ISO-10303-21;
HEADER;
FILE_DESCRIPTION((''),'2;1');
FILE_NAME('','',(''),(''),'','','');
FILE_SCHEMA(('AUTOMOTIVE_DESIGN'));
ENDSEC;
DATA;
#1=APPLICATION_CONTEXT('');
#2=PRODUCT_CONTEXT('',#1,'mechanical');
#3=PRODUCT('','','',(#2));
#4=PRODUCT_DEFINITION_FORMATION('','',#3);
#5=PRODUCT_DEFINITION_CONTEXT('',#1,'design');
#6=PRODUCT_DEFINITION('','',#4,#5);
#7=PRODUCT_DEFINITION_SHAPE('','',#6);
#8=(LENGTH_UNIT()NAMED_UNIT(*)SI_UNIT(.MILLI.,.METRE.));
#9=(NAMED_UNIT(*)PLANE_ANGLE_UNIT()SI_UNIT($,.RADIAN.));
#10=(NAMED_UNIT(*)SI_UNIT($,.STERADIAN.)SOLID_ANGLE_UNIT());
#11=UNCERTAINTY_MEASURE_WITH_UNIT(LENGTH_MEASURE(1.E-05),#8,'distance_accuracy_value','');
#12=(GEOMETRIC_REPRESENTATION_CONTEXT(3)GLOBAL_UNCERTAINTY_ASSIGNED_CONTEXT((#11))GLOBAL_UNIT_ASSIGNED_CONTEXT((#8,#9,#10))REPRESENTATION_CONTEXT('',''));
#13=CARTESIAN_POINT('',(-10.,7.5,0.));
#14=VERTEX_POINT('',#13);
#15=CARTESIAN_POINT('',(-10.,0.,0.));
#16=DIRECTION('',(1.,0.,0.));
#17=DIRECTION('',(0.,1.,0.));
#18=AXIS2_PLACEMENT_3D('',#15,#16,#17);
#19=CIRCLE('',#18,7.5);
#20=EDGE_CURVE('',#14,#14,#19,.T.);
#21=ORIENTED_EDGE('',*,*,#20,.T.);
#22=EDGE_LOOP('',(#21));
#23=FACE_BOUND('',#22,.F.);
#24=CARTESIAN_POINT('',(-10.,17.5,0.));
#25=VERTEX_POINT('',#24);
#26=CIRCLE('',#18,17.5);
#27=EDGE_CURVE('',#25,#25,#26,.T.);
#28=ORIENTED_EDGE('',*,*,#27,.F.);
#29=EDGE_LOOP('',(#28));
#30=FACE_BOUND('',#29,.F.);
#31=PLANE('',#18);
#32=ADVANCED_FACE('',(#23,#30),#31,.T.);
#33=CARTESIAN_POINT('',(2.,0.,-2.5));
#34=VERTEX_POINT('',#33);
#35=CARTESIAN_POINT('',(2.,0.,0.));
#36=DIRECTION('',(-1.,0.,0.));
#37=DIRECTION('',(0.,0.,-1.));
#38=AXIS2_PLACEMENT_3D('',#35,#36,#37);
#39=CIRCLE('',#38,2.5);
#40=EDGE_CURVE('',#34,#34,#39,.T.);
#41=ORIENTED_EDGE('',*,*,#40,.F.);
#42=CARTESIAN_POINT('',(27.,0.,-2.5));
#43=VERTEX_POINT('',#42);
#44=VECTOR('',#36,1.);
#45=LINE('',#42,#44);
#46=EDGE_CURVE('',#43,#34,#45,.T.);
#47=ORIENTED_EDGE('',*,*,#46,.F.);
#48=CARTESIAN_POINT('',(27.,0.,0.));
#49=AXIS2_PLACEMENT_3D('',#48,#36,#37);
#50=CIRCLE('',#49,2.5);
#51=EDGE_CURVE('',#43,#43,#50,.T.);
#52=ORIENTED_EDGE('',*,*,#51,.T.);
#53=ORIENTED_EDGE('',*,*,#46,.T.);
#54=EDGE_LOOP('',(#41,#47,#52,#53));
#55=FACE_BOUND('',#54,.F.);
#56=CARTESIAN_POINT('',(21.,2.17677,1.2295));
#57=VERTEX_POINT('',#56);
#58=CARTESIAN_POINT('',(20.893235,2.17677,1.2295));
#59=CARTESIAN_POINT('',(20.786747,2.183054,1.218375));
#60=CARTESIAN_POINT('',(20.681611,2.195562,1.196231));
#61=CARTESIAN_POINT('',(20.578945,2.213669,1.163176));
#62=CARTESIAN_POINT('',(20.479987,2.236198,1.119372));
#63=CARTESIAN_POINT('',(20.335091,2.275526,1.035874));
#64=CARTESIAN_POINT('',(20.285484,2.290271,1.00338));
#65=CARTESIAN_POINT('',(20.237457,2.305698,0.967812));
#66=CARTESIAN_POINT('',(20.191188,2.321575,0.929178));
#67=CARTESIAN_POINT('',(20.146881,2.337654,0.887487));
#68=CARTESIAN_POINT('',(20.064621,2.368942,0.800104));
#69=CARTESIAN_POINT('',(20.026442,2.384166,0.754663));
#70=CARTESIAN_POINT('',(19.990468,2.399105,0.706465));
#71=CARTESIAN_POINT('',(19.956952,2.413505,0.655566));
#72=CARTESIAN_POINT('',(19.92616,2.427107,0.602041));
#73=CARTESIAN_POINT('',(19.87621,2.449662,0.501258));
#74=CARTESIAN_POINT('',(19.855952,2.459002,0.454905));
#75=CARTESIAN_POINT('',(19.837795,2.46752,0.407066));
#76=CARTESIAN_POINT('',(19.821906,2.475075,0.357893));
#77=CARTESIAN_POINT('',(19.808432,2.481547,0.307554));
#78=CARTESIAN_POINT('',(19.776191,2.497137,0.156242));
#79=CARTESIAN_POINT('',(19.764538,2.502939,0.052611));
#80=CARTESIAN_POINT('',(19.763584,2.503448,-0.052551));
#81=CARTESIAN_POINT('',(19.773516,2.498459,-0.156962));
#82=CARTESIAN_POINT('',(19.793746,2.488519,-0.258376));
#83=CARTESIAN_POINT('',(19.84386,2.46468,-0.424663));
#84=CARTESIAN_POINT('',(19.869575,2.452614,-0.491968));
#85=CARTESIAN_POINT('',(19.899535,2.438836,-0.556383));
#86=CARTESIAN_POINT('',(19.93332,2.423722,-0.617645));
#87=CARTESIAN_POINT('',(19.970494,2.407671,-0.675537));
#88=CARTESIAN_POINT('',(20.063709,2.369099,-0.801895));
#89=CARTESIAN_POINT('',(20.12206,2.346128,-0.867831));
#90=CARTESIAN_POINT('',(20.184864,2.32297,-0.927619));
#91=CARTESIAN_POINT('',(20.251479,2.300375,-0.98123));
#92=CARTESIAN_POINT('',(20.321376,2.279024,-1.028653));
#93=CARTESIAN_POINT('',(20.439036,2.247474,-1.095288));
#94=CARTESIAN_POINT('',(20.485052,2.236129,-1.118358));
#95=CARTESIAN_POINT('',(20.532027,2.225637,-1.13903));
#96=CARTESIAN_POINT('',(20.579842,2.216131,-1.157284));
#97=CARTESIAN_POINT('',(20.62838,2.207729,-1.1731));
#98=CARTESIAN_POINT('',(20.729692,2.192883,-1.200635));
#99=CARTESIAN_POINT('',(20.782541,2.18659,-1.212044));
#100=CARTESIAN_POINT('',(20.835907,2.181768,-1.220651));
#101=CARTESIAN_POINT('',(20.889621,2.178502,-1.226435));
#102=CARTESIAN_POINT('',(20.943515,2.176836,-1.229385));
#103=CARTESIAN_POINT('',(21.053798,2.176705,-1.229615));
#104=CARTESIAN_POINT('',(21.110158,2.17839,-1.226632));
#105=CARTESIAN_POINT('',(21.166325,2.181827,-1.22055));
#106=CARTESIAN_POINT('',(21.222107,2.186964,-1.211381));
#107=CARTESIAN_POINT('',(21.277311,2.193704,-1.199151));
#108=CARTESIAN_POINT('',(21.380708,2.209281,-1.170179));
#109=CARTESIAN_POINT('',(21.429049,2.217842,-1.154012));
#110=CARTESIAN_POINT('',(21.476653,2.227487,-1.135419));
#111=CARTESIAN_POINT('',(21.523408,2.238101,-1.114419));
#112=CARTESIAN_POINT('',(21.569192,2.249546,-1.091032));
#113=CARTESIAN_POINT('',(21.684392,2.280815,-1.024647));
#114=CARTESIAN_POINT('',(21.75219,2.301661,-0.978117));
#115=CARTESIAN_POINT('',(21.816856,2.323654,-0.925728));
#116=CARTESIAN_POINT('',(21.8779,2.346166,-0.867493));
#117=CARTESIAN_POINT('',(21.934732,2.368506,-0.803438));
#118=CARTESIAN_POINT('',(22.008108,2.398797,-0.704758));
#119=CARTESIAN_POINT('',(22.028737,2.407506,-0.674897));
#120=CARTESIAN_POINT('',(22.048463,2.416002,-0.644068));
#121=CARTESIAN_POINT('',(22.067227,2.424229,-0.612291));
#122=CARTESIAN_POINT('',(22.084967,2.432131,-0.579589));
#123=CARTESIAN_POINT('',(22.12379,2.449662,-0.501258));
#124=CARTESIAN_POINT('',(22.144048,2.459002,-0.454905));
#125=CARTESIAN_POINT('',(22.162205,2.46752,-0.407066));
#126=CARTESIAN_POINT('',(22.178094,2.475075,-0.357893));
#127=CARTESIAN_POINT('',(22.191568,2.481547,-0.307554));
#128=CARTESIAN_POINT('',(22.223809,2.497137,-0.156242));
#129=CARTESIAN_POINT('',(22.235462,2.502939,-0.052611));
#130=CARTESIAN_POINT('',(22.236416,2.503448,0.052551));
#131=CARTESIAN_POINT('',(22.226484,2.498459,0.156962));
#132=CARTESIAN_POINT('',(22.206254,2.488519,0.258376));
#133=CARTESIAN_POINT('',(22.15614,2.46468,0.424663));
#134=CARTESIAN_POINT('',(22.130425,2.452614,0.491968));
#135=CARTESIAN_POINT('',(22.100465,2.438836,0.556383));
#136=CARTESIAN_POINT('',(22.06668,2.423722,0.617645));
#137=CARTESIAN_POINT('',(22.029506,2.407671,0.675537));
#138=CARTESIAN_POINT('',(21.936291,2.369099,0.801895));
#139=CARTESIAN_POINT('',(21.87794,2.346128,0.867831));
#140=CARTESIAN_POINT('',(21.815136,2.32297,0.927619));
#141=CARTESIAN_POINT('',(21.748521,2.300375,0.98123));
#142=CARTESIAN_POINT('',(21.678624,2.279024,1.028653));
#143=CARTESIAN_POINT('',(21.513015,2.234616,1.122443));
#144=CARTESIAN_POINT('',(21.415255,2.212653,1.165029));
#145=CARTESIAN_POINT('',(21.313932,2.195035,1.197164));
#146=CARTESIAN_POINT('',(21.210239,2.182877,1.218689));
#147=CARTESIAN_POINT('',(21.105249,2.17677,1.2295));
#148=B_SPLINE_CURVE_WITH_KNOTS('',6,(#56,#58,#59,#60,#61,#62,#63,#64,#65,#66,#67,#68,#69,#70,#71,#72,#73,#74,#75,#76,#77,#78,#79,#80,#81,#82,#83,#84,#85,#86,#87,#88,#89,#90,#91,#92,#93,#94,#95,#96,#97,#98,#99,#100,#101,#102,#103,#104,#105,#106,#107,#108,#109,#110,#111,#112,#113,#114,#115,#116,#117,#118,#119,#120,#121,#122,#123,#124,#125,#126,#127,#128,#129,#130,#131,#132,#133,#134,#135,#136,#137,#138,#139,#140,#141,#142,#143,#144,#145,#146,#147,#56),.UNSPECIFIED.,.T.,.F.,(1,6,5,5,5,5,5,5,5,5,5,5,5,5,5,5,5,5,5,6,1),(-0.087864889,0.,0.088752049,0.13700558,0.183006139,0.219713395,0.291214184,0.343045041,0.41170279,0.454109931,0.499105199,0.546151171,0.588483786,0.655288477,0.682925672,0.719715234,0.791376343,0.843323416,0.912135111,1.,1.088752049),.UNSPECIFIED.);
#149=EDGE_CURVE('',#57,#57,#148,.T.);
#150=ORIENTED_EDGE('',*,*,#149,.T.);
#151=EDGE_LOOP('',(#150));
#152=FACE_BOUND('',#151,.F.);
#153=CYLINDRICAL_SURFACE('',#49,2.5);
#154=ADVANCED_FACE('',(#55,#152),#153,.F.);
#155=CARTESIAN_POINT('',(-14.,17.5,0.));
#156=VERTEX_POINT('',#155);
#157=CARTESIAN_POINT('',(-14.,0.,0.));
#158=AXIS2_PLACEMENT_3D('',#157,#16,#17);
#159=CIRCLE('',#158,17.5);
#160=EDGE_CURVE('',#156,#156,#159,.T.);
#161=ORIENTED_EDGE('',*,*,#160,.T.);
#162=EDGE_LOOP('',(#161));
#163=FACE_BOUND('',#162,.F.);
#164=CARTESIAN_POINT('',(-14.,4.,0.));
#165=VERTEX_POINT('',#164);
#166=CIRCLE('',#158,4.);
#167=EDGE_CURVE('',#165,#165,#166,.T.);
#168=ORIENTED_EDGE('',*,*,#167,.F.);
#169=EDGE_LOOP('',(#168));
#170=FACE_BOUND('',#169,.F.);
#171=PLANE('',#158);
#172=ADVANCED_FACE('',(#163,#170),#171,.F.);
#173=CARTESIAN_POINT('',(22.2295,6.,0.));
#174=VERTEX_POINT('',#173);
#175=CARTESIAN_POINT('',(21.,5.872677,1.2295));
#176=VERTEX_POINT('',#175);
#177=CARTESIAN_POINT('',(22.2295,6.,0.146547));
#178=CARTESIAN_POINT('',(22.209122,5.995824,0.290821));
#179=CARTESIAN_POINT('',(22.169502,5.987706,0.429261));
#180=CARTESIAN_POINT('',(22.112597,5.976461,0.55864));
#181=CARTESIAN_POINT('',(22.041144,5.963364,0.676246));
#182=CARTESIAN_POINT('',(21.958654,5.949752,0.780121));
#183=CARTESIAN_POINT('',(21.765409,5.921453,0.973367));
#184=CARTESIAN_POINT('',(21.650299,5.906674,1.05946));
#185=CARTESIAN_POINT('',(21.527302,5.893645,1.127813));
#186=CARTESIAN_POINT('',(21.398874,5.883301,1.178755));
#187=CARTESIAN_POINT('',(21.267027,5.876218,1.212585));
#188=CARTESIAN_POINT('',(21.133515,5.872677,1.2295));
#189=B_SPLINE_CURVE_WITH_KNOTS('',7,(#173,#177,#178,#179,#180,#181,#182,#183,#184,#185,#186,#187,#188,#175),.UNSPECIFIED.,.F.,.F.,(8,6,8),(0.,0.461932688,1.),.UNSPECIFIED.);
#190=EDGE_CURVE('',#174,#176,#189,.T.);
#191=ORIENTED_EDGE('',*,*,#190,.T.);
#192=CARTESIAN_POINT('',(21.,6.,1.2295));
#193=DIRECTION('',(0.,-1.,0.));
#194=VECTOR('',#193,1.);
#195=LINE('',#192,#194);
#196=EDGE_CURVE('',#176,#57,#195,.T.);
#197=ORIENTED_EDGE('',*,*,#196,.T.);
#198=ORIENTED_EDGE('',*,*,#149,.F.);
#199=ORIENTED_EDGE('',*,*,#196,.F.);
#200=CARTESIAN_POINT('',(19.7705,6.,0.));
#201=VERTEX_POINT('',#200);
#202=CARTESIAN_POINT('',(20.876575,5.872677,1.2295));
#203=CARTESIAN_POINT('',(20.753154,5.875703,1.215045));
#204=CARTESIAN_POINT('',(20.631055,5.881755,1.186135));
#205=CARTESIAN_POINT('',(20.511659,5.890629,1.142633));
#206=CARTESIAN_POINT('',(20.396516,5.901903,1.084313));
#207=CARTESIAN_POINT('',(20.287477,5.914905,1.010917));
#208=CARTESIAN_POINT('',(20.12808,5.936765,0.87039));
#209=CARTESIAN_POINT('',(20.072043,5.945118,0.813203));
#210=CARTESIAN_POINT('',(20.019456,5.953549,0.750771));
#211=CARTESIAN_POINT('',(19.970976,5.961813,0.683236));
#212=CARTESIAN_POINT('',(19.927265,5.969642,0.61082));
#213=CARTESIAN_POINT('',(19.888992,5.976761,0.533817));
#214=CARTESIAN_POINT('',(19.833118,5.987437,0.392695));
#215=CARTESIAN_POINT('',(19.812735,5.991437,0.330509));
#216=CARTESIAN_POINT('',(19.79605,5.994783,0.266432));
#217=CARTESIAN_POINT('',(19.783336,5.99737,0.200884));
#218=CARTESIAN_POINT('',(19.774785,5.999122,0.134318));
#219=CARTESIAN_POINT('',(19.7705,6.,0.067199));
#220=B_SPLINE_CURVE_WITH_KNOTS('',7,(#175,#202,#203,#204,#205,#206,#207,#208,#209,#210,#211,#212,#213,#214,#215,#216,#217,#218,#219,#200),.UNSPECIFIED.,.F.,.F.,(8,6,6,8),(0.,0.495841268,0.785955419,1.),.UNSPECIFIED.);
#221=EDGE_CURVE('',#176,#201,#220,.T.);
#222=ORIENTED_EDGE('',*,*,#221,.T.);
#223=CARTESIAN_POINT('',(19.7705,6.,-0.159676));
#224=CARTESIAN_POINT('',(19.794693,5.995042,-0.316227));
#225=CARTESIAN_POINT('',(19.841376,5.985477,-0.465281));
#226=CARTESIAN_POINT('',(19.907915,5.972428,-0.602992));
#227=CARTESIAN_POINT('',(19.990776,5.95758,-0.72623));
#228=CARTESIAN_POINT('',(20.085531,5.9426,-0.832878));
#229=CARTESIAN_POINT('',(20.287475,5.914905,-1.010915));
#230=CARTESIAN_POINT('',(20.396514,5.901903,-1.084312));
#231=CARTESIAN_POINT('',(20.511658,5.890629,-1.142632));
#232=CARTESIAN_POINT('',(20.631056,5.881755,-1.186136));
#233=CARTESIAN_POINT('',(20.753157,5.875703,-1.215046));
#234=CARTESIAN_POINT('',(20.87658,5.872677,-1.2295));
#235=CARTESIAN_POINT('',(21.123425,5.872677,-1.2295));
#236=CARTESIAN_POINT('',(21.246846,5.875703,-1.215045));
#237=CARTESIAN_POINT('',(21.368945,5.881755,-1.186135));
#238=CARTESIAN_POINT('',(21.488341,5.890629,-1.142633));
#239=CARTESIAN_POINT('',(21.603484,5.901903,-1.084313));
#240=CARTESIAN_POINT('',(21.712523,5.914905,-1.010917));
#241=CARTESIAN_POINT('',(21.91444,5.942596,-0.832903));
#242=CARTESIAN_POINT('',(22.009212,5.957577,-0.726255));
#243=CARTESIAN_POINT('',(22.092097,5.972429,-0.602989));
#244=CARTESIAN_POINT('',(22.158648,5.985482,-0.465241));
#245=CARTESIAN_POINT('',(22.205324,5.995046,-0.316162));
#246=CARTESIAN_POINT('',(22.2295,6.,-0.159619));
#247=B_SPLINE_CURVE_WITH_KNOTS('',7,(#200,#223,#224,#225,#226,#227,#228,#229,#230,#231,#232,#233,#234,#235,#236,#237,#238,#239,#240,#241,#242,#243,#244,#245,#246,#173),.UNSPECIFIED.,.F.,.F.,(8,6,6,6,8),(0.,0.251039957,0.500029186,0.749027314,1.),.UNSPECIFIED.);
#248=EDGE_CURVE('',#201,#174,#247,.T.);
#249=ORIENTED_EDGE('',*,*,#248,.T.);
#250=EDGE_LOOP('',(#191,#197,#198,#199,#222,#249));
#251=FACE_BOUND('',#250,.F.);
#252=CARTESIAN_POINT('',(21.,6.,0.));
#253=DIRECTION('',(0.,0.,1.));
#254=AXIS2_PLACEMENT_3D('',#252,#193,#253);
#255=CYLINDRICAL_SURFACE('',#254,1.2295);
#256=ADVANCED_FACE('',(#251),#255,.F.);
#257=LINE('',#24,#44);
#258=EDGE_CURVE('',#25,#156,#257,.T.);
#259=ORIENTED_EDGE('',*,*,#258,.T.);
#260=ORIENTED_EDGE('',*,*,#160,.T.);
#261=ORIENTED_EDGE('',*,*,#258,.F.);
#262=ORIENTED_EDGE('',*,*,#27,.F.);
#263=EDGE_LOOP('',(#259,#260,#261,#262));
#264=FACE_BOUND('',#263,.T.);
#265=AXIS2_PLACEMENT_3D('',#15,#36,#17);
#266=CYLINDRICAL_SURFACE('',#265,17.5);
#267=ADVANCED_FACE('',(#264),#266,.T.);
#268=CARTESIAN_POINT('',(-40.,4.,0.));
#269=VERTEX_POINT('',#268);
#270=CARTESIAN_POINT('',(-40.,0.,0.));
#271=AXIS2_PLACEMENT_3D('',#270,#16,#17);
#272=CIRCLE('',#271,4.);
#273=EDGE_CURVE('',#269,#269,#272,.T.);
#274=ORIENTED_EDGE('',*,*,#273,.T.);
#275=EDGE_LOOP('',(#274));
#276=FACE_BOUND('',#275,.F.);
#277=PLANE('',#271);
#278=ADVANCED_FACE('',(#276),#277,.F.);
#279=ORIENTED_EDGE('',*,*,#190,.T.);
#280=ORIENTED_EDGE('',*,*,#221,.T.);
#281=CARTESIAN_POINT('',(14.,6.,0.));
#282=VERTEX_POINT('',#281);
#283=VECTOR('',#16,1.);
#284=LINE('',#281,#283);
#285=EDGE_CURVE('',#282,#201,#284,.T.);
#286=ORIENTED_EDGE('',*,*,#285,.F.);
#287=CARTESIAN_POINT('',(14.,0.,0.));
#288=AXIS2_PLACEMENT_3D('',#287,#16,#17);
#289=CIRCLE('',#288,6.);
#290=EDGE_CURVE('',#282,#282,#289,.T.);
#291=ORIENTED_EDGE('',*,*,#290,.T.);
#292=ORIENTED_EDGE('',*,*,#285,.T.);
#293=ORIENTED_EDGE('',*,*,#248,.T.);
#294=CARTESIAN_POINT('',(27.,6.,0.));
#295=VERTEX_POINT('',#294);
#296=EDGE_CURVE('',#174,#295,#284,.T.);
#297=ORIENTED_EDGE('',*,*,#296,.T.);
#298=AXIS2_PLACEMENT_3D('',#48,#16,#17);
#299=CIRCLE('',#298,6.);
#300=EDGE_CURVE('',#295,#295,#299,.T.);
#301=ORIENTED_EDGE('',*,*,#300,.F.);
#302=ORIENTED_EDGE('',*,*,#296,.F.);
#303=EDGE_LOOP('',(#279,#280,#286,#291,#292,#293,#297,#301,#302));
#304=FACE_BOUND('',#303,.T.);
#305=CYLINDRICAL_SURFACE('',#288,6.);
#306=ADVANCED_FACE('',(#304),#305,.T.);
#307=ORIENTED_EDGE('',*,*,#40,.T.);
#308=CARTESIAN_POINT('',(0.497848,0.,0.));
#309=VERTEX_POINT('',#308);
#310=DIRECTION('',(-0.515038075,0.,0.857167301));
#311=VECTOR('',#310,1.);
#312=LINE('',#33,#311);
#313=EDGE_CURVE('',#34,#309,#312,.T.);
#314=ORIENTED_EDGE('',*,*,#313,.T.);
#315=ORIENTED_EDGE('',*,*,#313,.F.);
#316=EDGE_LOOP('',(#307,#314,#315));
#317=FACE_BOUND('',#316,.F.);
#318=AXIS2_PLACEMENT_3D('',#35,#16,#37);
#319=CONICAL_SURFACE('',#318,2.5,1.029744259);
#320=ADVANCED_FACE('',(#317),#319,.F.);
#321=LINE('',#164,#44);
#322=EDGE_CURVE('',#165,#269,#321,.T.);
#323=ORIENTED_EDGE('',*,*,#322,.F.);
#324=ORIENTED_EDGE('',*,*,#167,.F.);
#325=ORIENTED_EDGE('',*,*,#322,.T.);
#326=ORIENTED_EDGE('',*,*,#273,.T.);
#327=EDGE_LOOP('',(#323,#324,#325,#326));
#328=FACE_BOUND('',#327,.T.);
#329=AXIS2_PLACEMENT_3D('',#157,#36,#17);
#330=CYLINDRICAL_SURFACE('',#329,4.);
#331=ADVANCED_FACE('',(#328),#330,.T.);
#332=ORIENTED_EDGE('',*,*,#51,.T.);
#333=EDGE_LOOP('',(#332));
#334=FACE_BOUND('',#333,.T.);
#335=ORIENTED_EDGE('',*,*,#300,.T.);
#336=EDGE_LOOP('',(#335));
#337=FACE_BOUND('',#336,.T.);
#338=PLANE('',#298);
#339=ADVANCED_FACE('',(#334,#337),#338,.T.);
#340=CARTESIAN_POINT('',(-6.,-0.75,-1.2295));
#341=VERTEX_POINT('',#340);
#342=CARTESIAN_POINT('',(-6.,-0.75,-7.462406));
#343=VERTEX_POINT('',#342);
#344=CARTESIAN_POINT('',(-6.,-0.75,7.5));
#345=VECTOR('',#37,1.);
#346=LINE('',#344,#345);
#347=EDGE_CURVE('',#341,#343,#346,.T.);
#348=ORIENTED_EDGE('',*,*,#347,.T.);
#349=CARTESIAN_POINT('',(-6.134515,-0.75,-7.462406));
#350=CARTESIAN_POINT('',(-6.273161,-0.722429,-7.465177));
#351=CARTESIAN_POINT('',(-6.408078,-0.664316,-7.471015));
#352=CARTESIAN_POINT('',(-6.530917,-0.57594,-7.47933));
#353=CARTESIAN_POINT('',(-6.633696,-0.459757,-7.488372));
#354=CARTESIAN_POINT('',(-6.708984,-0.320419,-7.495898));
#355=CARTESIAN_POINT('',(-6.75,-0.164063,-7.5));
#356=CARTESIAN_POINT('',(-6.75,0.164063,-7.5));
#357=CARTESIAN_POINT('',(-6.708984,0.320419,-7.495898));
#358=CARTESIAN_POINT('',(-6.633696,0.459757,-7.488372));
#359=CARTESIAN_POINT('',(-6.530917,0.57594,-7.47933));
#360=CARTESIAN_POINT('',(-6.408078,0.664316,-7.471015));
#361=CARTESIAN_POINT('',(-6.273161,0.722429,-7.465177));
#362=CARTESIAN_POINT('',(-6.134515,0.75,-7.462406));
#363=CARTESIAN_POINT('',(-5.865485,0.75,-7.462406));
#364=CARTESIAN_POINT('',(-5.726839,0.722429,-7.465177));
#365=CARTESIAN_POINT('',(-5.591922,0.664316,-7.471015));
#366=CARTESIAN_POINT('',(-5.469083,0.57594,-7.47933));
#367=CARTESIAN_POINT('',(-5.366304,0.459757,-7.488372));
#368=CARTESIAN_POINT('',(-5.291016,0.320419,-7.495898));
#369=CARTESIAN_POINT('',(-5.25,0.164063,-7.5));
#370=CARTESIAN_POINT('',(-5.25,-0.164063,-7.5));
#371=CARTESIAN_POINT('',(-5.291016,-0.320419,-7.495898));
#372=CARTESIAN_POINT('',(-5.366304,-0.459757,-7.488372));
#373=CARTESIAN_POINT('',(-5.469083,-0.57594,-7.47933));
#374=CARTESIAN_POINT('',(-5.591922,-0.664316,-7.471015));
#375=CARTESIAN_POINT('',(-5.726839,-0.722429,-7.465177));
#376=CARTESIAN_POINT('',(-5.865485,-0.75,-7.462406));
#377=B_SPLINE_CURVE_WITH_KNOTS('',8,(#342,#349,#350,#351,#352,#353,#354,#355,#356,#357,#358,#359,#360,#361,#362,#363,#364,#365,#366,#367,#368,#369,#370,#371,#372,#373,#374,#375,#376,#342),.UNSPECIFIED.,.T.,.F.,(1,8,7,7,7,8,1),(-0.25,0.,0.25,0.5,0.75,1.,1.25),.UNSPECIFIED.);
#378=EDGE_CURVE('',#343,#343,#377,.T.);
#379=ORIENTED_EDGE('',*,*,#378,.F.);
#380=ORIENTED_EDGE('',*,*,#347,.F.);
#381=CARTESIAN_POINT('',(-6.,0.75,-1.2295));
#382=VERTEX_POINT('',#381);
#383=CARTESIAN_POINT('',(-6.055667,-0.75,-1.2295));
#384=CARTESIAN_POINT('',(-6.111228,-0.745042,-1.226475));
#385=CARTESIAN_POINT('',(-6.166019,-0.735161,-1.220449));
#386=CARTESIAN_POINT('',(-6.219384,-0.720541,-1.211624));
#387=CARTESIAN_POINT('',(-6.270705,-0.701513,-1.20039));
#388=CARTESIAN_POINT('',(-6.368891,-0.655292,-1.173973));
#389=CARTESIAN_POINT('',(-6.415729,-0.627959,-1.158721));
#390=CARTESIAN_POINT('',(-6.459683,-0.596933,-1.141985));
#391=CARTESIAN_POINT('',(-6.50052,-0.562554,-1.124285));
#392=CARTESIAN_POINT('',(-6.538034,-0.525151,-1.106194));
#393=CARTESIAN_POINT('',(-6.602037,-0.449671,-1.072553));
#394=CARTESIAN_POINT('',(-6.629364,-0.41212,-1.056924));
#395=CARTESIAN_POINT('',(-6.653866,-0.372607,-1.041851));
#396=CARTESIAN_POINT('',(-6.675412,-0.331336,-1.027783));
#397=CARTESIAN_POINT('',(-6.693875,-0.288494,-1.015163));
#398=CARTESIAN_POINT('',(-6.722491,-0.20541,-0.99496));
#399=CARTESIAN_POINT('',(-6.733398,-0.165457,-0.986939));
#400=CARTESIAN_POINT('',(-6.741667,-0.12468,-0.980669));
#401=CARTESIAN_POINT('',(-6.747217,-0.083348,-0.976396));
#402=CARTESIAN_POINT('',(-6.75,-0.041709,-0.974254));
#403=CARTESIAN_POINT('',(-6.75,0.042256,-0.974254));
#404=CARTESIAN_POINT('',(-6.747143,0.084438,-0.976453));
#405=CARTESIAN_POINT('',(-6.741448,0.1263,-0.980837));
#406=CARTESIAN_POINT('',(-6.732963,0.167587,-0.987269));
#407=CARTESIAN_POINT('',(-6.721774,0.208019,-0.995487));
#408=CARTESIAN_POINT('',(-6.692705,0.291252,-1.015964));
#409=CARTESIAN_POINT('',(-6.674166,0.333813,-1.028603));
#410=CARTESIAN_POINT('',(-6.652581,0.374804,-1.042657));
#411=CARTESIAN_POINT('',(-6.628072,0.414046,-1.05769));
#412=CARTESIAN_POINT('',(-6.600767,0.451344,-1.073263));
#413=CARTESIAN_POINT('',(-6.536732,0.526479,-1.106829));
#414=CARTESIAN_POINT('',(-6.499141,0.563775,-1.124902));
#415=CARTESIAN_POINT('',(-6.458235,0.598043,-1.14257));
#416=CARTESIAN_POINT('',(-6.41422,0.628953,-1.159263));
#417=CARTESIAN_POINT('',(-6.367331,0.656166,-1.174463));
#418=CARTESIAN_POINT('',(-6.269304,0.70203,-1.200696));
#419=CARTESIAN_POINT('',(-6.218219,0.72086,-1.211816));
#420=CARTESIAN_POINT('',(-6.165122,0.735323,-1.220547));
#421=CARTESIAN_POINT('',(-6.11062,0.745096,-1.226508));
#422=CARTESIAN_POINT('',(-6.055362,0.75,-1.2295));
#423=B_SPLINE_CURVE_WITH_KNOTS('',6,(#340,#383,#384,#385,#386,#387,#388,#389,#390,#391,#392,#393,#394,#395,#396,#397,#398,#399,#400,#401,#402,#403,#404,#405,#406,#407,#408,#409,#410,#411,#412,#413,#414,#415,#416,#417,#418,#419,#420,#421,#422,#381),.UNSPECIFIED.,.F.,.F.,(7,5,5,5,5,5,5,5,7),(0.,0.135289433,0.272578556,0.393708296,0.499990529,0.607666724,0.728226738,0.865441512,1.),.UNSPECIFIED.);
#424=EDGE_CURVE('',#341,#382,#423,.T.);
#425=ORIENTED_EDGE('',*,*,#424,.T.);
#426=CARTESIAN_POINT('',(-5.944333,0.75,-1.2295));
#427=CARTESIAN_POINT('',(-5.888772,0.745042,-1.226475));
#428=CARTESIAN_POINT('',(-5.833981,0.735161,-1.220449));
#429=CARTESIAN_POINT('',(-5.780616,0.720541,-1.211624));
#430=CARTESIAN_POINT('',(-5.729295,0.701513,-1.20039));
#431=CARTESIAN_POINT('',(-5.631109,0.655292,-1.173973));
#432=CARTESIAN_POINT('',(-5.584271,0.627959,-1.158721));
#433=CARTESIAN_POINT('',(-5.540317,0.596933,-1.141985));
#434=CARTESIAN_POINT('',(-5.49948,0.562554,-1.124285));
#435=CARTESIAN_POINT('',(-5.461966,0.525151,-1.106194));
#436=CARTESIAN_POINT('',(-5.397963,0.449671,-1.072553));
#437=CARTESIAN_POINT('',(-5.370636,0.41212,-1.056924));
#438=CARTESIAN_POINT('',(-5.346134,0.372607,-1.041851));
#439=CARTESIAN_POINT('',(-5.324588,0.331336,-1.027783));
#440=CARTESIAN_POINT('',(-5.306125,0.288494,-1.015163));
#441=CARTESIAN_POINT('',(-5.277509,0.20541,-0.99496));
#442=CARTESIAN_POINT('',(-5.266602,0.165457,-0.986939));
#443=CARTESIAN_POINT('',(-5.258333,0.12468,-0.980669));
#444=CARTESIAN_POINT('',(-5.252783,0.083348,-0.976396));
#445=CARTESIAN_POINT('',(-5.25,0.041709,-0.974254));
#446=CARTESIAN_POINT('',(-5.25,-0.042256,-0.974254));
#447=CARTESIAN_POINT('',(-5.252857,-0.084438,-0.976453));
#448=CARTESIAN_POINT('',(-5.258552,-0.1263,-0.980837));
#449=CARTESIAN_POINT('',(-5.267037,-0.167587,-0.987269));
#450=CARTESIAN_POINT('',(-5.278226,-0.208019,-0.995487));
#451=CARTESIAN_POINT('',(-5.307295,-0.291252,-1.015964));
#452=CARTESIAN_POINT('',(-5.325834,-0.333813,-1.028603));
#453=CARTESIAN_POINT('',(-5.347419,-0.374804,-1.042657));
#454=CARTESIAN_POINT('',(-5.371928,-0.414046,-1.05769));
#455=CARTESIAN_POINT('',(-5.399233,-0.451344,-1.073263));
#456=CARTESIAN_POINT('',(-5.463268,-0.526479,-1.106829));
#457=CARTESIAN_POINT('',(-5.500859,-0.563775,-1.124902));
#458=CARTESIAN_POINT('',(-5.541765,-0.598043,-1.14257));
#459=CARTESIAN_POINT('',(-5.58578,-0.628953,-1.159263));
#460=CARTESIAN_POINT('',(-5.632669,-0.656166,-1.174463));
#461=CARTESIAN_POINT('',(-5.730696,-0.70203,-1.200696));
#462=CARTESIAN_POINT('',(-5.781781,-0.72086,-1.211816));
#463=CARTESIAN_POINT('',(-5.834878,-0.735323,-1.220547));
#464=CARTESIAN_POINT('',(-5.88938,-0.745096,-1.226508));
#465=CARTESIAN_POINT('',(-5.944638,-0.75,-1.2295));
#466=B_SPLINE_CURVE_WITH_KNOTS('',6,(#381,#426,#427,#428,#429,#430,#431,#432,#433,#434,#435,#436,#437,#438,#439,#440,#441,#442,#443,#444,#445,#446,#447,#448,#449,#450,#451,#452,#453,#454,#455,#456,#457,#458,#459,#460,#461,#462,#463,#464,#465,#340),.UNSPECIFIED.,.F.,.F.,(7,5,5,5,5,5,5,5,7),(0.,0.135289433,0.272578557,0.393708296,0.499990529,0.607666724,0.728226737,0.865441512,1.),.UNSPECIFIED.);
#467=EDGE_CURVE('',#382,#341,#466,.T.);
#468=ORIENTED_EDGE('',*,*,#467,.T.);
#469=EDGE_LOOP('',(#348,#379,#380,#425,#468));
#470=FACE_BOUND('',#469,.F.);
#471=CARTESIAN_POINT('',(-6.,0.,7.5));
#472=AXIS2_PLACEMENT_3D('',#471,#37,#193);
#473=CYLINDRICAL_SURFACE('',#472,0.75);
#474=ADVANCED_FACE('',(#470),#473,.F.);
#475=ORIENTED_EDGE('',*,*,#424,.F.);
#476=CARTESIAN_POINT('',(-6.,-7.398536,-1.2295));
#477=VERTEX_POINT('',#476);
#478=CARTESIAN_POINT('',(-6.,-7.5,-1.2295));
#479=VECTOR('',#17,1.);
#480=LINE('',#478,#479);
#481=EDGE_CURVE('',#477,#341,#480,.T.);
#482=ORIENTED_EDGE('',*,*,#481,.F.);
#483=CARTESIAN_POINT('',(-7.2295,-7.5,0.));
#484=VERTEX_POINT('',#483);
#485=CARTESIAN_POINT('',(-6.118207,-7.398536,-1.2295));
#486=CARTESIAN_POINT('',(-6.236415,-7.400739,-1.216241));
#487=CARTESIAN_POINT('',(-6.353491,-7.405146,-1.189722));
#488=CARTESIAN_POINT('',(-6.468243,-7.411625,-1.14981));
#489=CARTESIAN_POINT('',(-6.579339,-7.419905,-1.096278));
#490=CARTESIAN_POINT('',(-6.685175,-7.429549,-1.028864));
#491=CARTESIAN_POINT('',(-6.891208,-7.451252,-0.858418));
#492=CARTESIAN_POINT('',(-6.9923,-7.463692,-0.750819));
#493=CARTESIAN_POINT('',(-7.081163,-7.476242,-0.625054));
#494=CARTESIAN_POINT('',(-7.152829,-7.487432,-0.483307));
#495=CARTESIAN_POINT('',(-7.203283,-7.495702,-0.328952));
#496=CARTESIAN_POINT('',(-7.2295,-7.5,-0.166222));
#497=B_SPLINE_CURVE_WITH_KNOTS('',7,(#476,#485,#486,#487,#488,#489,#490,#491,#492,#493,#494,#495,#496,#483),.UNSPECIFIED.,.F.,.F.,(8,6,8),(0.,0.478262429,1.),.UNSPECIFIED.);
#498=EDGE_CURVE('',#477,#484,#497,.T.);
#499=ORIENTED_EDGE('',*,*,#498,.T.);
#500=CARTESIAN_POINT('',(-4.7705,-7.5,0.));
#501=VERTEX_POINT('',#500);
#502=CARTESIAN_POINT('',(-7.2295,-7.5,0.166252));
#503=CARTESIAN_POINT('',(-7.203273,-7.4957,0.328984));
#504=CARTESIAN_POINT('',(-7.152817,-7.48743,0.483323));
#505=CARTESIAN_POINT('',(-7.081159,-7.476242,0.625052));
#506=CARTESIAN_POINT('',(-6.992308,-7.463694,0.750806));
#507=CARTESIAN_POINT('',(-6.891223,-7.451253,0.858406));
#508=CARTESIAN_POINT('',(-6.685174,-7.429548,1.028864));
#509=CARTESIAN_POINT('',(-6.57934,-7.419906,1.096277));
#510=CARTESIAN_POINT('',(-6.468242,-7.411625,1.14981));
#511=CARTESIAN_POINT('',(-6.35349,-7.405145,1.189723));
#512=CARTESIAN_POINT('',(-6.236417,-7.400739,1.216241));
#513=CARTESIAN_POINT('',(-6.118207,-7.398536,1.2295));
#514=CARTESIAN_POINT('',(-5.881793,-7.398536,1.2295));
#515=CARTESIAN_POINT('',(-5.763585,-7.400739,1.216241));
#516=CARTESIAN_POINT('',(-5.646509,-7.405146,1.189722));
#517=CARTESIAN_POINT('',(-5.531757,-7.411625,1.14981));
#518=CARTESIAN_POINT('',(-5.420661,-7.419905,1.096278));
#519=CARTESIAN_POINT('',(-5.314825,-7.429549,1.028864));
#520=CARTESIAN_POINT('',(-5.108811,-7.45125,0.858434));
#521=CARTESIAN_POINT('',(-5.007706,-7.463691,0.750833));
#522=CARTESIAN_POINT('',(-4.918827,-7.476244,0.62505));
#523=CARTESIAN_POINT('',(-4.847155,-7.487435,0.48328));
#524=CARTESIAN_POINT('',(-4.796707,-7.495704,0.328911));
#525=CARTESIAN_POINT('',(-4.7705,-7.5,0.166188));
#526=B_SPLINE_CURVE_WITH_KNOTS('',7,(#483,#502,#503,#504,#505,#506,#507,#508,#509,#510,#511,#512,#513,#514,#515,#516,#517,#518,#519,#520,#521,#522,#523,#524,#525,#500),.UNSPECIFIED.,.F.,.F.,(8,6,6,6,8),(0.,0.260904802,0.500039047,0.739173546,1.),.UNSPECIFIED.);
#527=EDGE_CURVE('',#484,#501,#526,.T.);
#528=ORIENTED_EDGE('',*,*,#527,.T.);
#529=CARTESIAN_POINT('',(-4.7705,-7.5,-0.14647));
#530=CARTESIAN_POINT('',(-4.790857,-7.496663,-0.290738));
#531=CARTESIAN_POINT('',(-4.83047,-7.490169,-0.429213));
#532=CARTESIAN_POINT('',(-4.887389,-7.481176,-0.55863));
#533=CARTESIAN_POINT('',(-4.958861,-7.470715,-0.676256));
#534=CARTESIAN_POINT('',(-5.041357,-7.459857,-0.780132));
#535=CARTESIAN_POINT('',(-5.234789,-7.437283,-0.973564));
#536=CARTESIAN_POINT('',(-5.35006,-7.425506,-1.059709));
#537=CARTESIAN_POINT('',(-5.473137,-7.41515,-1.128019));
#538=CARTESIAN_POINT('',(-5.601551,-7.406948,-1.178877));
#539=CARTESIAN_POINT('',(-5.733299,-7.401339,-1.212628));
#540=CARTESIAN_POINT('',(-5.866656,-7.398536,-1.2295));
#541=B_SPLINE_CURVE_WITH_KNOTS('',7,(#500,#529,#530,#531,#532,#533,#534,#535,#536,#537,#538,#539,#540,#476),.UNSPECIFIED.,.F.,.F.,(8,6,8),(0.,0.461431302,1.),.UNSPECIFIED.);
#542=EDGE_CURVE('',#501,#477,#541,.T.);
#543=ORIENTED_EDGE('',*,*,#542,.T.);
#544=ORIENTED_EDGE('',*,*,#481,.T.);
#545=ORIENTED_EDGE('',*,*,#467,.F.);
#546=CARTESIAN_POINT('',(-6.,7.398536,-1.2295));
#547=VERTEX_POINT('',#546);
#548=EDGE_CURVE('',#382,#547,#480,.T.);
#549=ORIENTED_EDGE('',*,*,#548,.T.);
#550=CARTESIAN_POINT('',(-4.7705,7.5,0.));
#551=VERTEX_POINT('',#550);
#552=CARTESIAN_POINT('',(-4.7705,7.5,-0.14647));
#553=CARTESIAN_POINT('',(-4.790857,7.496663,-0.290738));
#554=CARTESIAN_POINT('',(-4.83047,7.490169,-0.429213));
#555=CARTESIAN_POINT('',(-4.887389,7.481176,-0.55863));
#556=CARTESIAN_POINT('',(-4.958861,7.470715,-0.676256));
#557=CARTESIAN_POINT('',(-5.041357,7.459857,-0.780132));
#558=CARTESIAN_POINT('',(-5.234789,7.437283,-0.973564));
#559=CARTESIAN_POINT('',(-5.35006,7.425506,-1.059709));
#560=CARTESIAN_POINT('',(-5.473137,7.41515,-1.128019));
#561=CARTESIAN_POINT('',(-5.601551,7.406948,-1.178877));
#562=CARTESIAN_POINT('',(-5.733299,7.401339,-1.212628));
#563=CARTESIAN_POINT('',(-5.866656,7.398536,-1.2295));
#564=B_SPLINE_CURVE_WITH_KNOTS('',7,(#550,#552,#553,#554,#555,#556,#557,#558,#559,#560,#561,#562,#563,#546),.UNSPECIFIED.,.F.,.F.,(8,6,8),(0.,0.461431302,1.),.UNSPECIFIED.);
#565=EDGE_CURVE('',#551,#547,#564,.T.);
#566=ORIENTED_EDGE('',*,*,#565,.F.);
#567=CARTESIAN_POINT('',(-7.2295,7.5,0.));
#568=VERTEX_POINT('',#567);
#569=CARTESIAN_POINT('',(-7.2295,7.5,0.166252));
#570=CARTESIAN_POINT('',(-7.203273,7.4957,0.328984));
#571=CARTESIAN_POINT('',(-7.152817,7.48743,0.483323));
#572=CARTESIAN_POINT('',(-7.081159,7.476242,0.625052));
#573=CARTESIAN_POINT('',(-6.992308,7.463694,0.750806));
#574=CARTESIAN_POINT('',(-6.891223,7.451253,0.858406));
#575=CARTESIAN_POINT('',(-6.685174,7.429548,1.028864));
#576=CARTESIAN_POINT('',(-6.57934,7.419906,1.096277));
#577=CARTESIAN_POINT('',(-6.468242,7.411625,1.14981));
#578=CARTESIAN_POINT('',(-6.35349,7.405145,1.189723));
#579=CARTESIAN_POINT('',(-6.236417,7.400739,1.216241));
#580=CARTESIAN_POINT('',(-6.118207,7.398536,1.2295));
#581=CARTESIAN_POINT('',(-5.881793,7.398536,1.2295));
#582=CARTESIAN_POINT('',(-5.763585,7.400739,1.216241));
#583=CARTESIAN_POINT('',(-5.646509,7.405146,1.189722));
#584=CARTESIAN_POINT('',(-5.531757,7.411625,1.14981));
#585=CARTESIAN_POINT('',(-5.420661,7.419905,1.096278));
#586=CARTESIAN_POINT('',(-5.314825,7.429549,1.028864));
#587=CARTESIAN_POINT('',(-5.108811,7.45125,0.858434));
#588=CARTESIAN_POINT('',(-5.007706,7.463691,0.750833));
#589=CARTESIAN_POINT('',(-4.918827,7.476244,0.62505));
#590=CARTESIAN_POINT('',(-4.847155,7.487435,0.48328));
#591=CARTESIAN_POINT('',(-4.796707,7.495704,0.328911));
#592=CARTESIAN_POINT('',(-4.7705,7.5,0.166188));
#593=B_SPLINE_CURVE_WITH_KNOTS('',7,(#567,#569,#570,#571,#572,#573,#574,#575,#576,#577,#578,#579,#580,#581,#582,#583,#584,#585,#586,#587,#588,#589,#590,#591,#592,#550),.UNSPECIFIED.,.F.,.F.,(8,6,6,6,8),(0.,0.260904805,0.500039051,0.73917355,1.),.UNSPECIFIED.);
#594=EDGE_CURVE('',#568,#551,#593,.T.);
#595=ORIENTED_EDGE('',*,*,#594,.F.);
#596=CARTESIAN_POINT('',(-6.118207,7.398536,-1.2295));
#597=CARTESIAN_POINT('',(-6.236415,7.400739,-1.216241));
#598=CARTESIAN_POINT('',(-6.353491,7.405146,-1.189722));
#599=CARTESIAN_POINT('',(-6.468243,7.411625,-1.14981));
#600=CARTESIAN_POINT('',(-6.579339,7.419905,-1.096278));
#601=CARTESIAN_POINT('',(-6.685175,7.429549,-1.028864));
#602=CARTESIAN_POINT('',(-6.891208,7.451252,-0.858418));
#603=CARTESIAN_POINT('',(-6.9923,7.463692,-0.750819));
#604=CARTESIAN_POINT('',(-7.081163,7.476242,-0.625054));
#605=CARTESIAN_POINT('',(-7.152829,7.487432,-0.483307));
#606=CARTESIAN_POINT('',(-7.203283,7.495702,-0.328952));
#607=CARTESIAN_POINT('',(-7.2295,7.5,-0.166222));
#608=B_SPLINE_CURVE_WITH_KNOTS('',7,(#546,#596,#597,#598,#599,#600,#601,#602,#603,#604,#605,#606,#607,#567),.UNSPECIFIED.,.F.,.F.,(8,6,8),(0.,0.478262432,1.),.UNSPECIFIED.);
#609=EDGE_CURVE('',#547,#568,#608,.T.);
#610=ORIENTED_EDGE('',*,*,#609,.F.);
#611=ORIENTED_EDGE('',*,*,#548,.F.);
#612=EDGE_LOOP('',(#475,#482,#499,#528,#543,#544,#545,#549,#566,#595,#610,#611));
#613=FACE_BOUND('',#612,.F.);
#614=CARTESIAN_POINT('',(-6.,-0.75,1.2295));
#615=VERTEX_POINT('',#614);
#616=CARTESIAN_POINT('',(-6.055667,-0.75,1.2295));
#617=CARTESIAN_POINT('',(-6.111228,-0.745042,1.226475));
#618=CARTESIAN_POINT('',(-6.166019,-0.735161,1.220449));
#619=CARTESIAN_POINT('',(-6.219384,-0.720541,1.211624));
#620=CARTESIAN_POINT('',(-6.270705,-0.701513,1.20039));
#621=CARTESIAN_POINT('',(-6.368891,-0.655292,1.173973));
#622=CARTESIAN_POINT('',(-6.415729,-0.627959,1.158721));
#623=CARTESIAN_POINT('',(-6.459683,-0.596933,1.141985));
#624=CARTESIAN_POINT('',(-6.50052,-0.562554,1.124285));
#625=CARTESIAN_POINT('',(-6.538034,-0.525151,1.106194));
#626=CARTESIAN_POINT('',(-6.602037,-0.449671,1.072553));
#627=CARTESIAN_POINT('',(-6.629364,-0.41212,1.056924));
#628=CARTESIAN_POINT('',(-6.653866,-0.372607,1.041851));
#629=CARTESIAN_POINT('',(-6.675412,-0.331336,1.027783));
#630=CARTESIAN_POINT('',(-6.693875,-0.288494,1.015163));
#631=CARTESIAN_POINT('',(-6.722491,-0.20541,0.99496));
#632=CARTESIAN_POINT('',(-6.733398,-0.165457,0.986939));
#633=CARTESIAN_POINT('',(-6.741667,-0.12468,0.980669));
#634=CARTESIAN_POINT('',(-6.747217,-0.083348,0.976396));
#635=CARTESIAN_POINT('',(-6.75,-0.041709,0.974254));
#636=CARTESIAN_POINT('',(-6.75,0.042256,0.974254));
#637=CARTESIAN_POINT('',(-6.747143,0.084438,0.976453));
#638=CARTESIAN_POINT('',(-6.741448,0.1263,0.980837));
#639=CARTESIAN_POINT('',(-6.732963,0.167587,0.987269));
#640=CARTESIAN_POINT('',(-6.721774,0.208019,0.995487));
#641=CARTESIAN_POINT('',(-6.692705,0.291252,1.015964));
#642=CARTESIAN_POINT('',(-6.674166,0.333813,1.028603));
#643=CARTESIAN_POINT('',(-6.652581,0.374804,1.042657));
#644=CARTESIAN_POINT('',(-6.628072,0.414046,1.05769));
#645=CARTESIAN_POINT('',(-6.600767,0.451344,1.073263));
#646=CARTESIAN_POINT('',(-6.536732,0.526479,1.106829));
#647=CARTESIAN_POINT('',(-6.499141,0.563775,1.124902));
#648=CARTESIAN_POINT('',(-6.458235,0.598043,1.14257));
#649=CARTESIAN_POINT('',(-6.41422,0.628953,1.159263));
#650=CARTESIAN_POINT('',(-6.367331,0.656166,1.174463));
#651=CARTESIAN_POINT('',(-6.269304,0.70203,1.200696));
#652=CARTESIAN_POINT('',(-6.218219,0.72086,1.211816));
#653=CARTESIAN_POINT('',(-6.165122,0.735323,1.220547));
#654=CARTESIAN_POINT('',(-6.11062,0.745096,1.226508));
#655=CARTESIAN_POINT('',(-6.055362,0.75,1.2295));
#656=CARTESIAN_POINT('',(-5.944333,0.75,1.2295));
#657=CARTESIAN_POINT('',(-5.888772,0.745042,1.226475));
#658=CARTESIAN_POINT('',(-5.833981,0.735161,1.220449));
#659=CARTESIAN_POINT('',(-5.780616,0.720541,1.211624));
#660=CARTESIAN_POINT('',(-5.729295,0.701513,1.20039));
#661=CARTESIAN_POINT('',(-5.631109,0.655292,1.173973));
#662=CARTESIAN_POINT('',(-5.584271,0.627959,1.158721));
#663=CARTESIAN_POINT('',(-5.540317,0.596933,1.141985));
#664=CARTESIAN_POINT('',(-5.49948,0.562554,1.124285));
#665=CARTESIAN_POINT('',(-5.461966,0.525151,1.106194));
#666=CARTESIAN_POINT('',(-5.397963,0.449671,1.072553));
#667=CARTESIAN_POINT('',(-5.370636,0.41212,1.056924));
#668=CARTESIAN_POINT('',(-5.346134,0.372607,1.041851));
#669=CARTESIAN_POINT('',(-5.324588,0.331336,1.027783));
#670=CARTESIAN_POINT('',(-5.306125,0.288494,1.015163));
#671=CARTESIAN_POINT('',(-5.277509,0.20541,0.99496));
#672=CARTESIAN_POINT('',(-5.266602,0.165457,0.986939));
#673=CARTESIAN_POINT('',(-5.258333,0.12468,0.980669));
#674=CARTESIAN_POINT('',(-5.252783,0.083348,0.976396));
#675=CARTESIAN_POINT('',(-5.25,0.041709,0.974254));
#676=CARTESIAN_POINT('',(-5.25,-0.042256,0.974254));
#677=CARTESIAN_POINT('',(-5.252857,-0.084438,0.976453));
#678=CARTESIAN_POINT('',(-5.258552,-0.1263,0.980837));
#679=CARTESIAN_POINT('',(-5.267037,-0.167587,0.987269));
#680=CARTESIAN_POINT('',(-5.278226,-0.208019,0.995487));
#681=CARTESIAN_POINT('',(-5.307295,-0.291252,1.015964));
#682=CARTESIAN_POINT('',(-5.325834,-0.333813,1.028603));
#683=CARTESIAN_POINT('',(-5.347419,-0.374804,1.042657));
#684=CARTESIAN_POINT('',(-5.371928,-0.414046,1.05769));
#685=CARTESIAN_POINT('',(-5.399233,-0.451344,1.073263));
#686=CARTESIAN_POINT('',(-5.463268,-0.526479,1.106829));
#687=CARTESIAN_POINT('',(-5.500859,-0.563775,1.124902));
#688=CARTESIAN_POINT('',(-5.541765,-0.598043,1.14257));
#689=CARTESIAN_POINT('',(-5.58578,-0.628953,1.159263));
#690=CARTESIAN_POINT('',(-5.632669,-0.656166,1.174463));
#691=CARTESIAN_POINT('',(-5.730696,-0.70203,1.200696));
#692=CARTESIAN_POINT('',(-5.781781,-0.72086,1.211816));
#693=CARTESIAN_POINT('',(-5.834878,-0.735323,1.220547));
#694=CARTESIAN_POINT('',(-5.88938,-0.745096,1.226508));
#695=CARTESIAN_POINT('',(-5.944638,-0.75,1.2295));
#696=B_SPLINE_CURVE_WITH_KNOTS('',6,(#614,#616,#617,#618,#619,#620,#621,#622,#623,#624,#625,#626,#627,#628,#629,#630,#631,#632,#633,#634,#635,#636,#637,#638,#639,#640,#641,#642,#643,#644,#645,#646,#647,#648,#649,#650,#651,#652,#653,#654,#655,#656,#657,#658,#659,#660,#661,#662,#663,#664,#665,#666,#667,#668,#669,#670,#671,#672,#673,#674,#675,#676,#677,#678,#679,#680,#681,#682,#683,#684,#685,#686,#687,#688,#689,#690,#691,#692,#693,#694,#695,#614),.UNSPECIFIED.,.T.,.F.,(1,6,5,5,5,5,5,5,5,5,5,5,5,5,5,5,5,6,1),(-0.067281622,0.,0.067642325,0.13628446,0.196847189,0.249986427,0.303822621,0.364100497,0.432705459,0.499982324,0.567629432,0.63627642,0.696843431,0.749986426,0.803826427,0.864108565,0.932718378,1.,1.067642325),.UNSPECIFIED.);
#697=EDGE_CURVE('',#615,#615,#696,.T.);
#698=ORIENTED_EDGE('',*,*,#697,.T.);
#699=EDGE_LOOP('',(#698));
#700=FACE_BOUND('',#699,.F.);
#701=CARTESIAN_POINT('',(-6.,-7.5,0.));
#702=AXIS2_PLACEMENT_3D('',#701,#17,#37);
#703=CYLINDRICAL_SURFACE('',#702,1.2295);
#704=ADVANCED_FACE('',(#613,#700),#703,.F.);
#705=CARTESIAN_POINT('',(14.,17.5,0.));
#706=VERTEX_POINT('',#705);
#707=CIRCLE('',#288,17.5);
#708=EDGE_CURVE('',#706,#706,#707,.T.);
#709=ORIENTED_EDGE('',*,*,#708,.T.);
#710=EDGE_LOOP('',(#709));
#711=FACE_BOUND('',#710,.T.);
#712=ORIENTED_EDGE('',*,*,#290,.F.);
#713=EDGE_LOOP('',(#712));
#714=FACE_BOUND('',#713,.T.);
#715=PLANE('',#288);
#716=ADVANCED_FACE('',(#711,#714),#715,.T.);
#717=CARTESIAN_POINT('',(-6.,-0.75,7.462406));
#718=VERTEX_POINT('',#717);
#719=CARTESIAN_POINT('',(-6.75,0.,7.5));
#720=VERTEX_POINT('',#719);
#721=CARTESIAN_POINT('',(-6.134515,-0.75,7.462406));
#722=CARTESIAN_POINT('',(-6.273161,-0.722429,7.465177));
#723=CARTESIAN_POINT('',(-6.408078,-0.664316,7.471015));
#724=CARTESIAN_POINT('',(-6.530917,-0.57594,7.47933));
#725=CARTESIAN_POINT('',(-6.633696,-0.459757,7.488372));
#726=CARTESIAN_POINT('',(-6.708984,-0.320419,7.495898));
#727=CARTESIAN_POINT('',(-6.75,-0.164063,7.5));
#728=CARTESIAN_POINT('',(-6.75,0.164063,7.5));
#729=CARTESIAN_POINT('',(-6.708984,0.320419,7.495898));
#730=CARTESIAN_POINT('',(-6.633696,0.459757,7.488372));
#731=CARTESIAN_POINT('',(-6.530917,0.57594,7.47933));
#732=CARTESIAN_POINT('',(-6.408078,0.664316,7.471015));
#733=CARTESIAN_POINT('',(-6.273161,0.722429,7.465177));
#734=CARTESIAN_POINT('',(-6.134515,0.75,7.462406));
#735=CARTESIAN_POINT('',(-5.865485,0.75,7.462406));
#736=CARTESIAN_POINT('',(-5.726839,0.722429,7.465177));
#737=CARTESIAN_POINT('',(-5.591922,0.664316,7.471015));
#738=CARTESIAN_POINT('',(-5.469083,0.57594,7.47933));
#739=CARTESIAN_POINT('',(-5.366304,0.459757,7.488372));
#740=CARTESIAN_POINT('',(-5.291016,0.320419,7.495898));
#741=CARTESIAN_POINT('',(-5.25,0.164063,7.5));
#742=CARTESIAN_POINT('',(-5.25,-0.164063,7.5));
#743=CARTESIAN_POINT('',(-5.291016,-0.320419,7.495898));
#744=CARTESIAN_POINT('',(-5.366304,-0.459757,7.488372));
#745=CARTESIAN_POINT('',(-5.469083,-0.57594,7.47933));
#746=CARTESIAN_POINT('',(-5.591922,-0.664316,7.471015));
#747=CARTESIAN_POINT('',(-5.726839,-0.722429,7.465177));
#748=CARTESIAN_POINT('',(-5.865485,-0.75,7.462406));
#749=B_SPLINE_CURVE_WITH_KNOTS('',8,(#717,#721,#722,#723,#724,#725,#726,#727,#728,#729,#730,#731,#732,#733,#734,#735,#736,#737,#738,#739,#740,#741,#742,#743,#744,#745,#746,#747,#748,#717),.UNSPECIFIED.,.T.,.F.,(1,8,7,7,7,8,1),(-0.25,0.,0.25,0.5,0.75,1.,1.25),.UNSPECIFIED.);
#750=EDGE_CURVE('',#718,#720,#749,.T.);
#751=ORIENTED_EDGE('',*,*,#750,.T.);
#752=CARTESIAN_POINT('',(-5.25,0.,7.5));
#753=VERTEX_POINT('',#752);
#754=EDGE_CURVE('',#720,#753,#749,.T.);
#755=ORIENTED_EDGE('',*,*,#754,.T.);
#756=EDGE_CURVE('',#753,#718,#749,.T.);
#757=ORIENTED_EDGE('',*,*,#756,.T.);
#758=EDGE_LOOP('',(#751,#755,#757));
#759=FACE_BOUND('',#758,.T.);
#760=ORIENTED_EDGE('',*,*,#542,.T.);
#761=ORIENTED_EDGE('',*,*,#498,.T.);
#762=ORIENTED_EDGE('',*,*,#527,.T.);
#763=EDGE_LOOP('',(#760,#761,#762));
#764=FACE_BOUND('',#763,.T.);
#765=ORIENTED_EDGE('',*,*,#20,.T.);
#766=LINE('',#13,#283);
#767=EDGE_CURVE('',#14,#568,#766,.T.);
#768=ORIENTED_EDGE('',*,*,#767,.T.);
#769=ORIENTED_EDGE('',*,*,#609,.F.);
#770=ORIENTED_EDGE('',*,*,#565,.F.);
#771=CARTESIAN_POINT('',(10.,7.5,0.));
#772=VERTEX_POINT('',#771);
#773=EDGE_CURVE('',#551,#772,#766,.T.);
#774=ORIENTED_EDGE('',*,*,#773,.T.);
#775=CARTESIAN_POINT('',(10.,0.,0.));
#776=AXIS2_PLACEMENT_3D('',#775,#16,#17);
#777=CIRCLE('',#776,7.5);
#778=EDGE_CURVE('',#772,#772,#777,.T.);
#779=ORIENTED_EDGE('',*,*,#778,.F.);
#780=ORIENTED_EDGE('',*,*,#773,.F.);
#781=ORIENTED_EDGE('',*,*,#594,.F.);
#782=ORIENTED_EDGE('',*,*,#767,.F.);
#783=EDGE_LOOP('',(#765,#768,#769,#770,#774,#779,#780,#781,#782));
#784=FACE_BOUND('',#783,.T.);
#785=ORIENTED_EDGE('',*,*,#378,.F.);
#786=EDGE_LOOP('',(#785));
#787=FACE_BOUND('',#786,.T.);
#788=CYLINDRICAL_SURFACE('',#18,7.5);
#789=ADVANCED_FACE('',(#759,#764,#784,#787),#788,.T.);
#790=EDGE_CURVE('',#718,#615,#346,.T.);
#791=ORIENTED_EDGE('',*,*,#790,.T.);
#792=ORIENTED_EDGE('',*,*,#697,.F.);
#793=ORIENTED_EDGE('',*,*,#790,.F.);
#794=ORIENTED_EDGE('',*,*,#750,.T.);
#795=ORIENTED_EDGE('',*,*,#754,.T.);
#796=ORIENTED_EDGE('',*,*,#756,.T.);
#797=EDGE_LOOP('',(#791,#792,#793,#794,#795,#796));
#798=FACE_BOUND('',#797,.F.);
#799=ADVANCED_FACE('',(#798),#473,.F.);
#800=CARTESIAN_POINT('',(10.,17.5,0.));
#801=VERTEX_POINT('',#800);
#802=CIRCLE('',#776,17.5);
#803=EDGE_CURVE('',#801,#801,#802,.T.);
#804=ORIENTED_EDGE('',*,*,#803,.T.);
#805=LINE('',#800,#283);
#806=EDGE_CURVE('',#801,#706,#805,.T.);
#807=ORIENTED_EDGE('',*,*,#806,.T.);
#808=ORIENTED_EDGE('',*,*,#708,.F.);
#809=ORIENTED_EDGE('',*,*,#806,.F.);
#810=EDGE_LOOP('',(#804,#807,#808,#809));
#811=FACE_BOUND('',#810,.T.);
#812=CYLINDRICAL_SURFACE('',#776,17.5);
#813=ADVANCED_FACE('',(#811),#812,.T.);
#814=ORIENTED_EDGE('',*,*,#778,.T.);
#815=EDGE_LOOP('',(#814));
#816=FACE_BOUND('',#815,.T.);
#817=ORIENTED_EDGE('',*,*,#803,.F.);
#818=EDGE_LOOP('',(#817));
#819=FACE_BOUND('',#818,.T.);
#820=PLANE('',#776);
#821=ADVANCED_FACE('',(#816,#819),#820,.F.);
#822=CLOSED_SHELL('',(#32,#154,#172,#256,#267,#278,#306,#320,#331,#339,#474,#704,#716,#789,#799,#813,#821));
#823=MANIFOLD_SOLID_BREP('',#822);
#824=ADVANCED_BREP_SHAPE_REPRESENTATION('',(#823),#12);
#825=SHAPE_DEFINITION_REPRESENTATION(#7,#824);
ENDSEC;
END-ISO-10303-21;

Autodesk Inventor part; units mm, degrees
sketch "Skizze1" plane through (0, 0, 0) normal (0, 0, 1) x (1, 0, 0)
  line L0 (-53.4, 0) -> (40.4, 0) projected
  line L1 (0, -3.5) -> (0, 21) projected
  line L2 (-10, 7.5) -> (10, 7.5)
  line L3 (10, 7.5) -> (10, 17.5)
  line L4 (10, 17.5) -> (14, 17.5)
  line L5 (14, 17.5) -> (14, 6)
  line L6 (14, 6) -> (27, 6)
  line L7 (27, 6) -> (27, 0)
  line L8 (-10, 7.5) -> (-10, 17.5)
  line L9 (-10, 17.5) -> (-14, 17.5)
  line L10 (-14, 17.5) -> (-14, 4)
  line L11 (-14, 4) -> (-40, 4)
  line L12 (-40, 4) -> (-40, 0)
  line L13 (-40, 0) -> (27, 0)
  point P0 (0, 0)
  dimension "d0" = 20
  dimension "d1" = 15
  dimension "d2" = 28
  dimension "d3" = 10
  dimension "d4" = 8
  dimension "d5" = 40
  dimension "d6" = 12
  dimension "d7" = 27
revolve "Umdrehung1" add sketch "Skizze1" angle 360 about axis through (-40, 0, 0) along (1, 0, 0)
ref_plane "Arbeitsebene1" through (0, 0, 7.5) normal (0, 0, 1) x (1, 0, 0)
ref_plane "Arbeitsebene2" through (0, -7.5, 0) normal (0, 1, 0) x (-1, 0, 0)
sketch "Skizze2" plane through (0, 0, 7.5) normal (0, 0, 1) x (1, 0, 0)
  line L0 (-53.4, 0) -> (40.4, 0) projected
  line L1 (0, -24.5) -> (0, 24.5) projected
  point P0 (0, 0)
  point P1 (-6, 0)
  dimension "d9" = 6
hole "Bohrung1" at (-6, 0, 7.5) direction (0, 0, -1) diameter 1.5 end through all
sketch "Skizze3" plane through (0, -7.5, 0) normal (0, 1, 0) x (-1, 0, 0)
  line L0 (53.4, 0) -> (-40.4, 0) projected
  line L1 (0, -24.5) -> (0, 24.5) projected
  point P0 (0, 0)
  point P1 (6, 0)
  dimension "d17" = 6
hole "Bohrung2" at (-6, -7.5, 0) direction (0, 1, 0) diameter 2.459 end through all thread size "M3x0.5" class "6H" standard "ISO Metric profile"
hole "Bohrung3" at (27, 0, 0) direction (-1, 0, 0) diameter 5 depth 25 tip angle 118
ref_plane "Arbeitsebene3" through (20.5, 6, 0) normal (0, 1, 0) x (-1, 0, 0)
sketch "Skizze6" plane through (20.5, 6, 0) normal (0, 1, 0) x (-1, 0, 0)
  line L0 (-6.5, 6) -> (-6.5, -6) projected
  line L1 (73.9, 0) -> (-19.9, 0) projected
  line L2 (20.5, -24.5) -> (20.5, 24.5) projected
  point P0 (20.5, 0)
  point P1 (-0.5, 0)
  dimension "d36" = 6
hole "Bohrung4" at (21, 6, 0) direction (0, -1, 0) diameter 2.459 end up to surface thread size "M3x0.5" class "6H" standard "ISO Metric profile"
properties part number "13_0204_055"
